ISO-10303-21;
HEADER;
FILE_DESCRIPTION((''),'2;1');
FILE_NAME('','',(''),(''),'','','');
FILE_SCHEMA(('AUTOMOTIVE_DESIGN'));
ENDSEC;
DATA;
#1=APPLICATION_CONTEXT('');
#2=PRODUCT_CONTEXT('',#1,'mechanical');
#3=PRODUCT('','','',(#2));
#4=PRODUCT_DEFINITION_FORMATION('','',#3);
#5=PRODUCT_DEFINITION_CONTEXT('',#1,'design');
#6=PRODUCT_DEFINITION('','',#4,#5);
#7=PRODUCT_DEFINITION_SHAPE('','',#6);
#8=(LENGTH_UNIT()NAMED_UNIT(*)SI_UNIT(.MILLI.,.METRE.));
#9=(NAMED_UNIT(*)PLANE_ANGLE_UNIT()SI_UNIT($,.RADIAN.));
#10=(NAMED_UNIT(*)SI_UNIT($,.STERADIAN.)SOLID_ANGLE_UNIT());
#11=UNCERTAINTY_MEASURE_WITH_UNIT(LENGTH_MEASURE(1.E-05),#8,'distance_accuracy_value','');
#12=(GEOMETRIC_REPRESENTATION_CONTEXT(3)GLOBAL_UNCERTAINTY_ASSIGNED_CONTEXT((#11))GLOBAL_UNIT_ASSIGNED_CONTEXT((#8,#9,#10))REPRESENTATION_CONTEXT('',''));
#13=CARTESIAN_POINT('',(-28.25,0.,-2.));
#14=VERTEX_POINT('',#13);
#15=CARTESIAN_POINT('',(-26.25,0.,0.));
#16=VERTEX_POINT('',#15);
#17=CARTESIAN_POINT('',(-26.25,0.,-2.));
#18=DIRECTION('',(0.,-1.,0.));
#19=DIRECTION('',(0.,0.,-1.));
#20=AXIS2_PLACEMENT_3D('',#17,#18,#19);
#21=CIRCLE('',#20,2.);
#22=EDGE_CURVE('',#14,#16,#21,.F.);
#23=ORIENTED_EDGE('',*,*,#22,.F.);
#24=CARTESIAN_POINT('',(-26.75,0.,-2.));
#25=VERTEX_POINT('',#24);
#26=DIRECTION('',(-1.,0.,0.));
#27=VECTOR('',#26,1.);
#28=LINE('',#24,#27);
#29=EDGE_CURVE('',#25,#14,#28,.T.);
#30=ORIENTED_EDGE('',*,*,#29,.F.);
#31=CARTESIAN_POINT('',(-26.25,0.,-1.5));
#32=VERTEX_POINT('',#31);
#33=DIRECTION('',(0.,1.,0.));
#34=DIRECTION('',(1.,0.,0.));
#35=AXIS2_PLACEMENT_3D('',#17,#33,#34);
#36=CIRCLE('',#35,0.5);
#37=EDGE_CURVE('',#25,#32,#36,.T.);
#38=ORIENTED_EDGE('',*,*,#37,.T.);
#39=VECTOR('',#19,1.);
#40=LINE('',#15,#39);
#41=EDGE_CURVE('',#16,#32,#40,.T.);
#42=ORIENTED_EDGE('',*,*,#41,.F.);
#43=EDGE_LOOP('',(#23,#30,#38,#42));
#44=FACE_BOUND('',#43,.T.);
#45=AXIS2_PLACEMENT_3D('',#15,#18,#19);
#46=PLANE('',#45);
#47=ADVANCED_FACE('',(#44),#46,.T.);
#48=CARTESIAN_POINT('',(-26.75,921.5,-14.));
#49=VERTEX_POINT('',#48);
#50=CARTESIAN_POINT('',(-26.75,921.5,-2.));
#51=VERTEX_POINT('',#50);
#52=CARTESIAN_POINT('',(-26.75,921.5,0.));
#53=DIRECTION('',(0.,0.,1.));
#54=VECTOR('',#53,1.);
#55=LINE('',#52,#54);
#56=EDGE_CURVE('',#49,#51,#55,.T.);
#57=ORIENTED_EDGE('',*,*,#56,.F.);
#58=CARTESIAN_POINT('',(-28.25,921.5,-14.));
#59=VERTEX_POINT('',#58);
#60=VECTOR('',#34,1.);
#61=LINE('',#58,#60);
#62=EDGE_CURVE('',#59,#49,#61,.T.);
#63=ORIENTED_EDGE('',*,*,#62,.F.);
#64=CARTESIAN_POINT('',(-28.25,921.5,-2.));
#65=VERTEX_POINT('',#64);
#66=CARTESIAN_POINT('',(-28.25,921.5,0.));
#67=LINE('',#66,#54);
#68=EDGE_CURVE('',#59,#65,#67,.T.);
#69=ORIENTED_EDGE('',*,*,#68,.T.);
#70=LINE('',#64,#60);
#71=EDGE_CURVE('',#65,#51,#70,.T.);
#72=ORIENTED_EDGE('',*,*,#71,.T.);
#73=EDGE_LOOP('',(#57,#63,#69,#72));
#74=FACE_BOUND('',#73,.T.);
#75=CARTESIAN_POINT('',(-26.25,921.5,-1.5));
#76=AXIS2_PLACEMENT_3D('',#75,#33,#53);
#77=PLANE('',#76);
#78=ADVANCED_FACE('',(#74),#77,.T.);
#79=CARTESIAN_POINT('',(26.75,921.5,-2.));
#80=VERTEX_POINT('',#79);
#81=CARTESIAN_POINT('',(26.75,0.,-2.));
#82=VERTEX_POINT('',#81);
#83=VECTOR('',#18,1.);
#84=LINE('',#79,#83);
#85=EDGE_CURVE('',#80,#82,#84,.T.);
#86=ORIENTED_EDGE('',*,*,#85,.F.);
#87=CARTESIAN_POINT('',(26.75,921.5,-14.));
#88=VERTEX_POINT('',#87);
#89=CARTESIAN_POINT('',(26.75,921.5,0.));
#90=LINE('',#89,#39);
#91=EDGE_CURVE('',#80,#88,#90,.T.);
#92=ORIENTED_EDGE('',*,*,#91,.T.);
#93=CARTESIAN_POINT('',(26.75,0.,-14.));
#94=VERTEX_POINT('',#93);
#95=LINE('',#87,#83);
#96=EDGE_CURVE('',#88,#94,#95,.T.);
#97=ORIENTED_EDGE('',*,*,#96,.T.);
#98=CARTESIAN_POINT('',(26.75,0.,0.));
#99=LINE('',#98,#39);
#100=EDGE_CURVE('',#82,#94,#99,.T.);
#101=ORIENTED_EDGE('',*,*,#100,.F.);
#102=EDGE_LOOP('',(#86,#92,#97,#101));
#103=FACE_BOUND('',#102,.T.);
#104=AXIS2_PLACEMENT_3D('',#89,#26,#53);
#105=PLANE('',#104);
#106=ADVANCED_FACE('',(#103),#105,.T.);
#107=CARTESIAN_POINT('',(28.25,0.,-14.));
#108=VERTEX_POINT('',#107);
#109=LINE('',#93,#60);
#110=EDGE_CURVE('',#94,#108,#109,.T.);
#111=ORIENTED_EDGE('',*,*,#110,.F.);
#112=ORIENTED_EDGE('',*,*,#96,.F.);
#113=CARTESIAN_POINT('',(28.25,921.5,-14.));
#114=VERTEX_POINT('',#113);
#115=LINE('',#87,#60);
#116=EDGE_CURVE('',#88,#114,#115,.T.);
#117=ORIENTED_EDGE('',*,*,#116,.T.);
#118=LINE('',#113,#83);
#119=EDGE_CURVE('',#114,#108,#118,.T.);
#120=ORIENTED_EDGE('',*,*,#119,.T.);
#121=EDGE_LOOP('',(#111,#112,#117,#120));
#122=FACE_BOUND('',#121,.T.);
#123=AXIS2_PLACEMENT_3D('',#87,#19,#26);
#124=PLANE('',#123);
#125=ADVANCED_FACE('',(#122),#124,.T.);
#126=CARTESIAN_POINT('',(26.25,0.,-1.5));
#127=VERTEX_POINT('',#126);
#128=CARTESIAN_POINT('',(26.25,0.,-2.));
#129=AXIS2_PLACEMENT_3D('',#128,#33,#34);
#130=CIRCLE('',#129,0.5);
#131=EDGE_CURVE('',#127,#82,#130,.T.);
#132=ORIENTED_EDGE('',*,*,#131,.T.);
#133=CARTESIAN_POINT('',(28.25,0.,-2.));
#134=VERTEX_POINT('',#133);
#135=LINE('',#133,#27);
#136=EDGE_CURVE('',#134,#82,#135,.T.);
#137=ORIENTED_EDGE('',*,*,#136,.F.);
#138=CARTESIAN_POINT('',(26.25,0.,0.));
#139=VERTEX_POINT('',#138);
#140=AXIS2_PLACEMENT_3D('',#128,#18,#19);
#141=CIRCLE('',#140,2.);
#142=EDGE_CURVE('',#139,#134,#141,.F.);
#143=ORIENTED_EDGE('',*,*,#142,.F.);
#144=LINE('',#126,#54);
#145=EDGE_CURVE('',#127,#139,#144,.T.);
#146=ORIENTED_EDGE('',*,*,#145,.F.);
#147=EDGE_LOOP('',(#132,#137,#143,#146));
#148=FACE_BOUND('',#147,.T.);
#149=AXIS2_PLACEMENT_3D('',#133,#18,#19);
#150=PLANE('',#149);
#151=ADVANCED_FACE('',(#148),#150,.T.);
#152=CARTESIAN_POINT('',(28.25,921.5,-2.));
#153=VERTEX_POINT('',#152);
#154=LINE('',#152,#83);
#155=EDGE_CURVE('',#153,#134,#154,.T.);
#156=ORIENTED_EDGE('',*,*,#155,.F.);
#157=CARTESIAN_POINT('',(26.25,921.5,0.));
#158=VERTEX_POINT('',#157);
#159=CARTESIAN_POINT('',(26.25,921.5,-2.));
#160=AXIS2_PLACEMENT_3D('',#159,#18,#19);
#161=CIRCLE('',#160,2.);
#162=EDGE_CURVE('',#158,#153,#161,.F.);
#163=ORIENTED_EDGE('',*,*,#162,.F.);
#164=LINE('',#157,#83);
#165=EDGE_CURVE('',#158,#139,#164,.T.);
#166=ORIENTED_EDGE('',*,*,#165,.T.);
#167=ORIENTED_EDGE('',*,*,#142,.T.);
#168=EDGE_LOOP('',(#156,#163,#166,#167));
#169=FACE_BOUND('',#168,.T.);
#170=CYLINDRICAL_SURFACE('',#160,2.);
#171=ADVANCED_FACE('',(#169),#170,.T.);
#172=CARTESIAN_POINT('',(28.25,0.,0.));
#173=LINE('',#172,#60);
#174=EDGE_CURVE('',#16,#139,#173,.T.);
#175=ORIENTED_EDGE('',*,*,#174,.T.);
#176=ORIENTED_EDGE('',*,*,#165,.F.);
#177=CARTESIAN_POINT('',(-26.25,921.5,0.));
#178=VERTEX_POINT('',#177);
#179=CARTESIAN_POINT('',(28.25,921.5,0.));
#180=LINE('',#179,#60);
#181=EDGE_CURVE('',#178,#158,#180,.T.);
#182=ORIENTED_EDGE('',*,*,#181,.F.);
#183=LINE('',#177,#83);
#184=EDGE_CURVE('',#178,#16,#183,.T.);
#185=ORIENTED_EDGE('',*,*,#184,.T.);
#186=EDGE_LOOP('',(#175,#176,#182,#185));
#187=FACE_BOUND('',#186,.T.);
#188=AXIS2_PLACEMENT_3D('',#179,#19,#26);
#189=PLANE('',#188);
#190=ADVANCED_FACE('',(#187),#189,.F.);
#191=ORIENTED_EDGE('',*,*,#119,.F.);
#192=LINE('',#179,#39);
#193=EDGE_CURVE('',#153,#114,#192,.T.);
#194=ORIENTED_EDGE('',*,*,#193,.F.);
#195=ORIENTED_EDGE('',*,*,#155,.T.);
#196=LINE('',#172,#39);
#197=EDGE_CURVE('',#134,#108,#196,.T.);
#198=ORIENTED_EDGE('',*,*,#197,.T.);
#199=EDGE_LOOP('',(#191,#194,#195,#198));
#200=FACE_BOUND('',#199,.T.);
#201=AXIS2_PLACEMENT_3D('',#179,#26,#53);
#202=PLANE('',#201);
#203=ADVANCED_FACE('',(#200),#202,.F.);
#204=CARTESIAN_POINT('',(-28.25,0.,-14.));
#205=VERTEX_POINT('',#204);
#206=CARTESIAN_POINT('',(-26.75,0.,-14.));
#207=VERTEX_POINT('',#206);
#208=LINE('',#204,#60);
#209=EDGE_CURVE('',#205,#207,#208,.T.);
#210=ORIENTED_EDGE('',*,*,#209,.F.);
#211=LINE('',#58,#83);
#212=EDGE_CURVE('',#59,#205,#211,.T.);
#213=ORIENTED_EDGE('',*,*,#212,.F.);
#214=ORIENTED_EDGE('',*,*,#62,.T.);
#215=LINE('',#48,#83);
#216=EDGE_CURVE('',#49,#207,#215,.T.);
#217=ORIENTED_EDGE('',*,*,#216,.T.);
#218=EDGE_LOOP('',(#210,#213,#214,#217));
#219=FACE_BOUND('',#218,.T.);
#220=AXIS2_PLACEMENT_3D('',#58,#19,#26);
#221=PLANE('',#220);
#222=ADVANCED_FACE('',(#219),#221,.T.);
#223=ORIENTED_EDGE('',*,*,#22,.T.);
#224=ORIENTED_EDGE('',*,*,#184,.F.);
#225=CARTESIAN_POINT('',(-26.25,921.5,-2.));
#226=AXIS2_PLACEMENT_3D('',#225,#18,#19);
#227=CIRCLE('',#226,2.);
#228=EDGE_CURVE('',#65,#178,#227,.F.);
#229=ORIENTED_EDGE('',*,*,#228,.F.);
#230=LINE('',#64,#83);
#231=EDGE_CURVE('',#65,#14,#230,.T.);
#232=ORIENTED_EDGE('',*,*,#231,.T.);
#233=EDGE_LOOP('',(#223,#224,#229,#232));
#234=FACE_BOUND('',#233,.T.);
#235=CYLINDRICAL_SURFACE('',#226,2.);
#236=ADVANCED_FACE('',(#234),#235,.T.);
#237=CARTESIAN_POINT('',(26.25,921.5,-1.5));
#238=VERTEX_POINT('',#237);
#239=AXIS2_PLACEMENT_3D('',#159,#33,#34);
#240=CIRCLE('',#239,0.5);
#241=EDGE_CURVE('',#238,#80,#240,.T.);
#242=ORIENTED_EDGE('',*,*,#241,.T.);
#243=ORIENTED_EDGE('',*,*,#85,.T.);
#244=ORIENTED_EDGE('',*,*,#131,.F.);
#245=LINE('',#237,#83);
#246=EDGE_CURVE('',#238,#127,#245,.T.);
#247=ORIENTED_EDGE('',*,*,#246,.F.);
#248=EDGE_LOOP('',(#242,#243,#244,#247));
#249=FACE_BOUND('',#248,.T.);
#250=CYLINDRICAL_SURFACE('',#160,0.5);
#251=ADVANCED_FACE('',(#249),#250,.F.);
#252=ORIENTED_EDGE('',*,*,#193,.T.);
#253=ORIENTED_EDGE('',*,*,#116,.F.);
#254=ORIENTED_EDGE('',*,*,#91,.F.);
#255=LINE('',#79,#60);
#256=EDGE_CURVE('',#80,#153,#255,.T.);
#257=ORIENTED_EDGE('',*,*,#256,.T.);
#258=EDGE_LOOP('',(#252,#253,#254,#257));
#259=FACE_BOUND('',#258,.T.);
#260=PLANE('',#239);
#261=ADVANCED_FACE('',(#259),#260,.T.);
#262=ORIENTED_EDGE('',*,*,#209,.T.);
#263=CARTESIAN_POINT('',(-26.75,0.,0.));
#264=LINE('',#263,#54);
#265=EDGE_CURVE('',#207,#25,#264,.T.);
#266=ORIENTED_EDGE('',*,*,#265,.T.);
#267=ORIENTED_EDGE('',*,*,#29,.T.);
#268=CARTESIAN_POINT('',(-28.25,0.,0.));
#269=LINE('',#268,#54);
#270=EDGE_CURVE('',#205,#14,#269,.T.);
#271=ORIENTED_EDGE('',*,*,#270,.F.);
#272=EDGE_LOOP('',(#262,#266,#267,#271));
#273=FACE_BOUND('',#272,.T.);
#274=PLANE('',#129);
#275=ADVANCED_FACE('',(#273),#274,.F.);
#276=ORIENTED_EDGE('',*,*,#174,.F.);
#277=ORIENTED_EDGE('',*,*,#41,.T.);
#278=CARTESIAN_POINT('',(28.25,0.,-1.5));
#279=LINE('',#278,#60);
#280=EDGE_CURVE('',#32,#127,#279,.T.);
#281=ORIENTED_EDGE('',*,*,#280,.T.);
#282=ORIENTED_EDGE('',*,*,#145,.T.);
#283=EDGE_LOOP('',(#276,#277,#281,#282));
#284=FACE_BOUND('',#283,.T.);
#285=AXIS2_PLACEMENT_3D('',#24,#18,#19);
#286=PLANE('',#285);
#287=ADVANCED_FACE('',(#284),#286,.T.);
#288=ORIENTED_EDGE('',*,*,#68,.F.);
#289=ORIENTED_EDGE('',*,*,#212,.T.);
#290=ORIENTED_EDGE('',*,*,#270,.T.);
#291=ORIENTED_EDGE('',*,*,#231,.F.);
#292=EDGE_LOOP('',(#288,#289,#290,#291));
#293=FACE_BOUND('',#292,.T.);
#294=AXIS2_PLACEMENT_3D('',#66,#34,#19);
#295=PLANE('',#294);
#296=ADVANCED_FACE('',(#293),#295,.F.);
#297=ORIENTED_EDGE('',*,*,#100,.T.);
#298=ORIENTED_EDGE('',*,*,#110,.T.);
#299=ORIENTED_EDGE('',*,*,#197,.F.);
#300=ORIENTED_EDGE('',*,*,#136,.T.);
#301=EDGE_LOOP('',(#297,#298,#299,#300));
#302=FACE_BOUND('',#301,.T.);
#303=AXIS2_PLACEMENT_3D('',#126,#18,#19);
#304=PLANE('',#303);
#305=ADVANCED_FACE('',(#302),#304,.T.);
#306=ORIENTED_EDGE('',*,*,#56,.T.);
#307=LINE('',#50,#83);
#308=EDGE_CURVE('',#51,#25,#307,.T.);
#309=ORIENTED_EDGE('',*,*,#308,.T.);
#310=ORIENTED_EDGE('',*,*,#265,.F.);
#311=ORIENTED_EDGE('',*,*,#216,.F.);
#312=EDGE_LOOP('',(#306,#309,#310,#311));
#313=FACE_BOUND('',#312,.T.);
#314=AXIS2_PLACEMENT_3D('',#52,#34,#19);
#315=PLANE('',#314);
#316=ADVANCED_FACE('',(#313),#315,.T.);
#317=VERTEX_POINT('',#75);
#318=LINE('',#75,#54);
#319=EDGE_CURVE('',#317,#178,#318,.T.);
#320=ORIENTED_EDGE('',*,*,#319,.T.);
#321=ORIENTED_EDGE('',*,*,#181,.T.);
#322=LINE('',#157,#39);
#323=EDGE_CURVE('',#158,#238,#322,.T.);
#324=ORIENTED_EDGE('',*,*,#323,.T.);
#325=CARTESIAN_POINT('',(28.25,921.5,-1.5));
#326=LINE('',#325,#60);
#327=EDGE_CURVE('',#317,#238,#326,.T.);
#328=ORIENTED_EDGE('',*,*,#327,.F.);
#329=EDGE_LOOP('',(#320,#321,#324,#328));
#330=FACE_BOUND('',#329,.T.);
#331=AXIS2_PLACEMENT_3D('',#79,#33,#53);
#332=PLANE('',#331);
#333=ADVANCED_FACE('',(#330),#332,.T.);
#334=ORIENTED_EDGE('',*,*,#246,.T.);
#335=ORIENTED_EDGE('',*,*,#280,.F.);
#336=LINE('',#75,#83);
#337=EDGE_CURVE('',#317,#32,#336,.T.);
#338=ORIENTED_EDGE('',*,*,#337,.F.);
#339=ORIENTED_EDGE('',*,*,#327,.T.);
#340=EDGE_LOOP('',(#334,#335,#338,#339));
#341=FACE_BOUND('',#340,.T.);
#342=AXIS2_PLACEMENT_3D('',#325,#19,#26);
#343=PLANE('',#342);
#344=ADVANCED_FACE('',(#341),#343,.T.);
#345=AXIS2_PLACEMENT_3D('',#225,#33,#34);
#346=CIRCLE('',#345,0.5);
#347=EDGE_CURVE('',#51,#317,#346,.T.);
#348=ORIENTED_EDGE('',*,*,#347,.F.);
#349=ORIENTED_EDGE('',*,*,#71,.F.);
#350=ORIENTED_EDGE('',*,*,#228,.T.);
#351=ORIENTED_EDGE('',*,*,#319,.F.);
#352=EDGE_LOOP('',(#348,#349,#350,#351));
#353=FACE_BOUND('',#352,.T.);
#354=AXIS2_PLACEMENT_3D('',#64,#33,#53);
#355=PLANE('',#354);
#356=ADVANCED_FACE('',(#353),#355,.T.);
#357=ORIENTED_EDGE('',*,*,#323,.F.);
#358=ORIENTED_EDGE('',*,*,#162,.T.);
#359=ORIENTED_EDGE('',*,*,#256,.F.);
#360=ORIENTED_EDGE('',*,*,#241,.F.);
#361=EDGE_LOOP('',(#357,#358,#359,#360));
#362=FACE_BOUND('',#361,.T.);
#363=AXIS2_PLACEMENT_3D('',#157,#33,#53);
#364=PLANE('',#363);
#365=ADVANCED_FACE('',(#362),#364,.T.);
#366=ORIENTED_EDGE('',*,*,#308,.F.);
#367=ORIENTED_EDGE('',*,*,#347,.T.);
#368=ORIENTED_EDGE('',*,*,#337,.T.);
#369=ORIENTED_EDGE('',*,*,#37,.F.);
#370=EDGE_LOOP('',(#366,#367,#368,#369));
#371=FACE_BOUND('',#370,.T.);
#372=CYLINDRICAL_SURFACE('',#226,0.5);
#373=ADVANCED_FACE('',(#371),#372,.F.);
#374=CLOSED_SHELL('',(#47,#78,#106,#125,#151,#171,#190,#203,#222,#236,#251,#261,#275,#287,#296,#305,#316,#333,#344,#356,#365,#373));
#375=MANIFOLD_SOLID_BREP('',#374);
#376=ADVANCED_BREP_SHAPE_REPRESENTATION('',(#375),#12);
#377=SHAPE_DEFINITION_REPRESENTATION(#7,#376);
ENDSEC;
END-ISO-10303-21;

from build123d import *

# Parameters (mm, degrees)
BASE_FLANGE1_DEPTH = 921.5


# Sheet-metal steps are written as plain solids
with BuildPart() as part:
    # Sketch1 → Base-Flange1 (new body)
    with BuildSketch(Plane(origin=(0, 0, 0), x_dir=(1, 0, 0), z_dir=(0, 1, 0))):
        with BuildLine():
            Line((28.25, 14), (28.25, 2))
            ThreePointArc((28.25, 2), (27.664213562, 0.585786438), (26.25, 0))
            Line((26.25, 0), (-26.25, 0))
            ThreePointArc((-26.25, 0), (-27.664213562, 0.585786438), (-28.25, 2))
            Line((-28.25, 2), (-28.25, 14))
            Line((-28.25, 14), (-26.75, 14))
            Line((-26.75, 14), (-26.75, 2))
            ThreePointArc((-26.75, 2), (-26.603553391, 1.646446609), (-26.25, 1.5))
            Line((-26.25, 1.5), (26.25, 1.5))
            ThreePointArc((26.25, 1.5), (26.603553391, 1.646446609), (26.75, 2))
            Line((26.75, 2), (26.75, 14))
            Line((26.75, 14), (28.25, 14))
        make_face()
    extrude(amount=BASE_FLANGE1_DEPTH)


solid = part.part
